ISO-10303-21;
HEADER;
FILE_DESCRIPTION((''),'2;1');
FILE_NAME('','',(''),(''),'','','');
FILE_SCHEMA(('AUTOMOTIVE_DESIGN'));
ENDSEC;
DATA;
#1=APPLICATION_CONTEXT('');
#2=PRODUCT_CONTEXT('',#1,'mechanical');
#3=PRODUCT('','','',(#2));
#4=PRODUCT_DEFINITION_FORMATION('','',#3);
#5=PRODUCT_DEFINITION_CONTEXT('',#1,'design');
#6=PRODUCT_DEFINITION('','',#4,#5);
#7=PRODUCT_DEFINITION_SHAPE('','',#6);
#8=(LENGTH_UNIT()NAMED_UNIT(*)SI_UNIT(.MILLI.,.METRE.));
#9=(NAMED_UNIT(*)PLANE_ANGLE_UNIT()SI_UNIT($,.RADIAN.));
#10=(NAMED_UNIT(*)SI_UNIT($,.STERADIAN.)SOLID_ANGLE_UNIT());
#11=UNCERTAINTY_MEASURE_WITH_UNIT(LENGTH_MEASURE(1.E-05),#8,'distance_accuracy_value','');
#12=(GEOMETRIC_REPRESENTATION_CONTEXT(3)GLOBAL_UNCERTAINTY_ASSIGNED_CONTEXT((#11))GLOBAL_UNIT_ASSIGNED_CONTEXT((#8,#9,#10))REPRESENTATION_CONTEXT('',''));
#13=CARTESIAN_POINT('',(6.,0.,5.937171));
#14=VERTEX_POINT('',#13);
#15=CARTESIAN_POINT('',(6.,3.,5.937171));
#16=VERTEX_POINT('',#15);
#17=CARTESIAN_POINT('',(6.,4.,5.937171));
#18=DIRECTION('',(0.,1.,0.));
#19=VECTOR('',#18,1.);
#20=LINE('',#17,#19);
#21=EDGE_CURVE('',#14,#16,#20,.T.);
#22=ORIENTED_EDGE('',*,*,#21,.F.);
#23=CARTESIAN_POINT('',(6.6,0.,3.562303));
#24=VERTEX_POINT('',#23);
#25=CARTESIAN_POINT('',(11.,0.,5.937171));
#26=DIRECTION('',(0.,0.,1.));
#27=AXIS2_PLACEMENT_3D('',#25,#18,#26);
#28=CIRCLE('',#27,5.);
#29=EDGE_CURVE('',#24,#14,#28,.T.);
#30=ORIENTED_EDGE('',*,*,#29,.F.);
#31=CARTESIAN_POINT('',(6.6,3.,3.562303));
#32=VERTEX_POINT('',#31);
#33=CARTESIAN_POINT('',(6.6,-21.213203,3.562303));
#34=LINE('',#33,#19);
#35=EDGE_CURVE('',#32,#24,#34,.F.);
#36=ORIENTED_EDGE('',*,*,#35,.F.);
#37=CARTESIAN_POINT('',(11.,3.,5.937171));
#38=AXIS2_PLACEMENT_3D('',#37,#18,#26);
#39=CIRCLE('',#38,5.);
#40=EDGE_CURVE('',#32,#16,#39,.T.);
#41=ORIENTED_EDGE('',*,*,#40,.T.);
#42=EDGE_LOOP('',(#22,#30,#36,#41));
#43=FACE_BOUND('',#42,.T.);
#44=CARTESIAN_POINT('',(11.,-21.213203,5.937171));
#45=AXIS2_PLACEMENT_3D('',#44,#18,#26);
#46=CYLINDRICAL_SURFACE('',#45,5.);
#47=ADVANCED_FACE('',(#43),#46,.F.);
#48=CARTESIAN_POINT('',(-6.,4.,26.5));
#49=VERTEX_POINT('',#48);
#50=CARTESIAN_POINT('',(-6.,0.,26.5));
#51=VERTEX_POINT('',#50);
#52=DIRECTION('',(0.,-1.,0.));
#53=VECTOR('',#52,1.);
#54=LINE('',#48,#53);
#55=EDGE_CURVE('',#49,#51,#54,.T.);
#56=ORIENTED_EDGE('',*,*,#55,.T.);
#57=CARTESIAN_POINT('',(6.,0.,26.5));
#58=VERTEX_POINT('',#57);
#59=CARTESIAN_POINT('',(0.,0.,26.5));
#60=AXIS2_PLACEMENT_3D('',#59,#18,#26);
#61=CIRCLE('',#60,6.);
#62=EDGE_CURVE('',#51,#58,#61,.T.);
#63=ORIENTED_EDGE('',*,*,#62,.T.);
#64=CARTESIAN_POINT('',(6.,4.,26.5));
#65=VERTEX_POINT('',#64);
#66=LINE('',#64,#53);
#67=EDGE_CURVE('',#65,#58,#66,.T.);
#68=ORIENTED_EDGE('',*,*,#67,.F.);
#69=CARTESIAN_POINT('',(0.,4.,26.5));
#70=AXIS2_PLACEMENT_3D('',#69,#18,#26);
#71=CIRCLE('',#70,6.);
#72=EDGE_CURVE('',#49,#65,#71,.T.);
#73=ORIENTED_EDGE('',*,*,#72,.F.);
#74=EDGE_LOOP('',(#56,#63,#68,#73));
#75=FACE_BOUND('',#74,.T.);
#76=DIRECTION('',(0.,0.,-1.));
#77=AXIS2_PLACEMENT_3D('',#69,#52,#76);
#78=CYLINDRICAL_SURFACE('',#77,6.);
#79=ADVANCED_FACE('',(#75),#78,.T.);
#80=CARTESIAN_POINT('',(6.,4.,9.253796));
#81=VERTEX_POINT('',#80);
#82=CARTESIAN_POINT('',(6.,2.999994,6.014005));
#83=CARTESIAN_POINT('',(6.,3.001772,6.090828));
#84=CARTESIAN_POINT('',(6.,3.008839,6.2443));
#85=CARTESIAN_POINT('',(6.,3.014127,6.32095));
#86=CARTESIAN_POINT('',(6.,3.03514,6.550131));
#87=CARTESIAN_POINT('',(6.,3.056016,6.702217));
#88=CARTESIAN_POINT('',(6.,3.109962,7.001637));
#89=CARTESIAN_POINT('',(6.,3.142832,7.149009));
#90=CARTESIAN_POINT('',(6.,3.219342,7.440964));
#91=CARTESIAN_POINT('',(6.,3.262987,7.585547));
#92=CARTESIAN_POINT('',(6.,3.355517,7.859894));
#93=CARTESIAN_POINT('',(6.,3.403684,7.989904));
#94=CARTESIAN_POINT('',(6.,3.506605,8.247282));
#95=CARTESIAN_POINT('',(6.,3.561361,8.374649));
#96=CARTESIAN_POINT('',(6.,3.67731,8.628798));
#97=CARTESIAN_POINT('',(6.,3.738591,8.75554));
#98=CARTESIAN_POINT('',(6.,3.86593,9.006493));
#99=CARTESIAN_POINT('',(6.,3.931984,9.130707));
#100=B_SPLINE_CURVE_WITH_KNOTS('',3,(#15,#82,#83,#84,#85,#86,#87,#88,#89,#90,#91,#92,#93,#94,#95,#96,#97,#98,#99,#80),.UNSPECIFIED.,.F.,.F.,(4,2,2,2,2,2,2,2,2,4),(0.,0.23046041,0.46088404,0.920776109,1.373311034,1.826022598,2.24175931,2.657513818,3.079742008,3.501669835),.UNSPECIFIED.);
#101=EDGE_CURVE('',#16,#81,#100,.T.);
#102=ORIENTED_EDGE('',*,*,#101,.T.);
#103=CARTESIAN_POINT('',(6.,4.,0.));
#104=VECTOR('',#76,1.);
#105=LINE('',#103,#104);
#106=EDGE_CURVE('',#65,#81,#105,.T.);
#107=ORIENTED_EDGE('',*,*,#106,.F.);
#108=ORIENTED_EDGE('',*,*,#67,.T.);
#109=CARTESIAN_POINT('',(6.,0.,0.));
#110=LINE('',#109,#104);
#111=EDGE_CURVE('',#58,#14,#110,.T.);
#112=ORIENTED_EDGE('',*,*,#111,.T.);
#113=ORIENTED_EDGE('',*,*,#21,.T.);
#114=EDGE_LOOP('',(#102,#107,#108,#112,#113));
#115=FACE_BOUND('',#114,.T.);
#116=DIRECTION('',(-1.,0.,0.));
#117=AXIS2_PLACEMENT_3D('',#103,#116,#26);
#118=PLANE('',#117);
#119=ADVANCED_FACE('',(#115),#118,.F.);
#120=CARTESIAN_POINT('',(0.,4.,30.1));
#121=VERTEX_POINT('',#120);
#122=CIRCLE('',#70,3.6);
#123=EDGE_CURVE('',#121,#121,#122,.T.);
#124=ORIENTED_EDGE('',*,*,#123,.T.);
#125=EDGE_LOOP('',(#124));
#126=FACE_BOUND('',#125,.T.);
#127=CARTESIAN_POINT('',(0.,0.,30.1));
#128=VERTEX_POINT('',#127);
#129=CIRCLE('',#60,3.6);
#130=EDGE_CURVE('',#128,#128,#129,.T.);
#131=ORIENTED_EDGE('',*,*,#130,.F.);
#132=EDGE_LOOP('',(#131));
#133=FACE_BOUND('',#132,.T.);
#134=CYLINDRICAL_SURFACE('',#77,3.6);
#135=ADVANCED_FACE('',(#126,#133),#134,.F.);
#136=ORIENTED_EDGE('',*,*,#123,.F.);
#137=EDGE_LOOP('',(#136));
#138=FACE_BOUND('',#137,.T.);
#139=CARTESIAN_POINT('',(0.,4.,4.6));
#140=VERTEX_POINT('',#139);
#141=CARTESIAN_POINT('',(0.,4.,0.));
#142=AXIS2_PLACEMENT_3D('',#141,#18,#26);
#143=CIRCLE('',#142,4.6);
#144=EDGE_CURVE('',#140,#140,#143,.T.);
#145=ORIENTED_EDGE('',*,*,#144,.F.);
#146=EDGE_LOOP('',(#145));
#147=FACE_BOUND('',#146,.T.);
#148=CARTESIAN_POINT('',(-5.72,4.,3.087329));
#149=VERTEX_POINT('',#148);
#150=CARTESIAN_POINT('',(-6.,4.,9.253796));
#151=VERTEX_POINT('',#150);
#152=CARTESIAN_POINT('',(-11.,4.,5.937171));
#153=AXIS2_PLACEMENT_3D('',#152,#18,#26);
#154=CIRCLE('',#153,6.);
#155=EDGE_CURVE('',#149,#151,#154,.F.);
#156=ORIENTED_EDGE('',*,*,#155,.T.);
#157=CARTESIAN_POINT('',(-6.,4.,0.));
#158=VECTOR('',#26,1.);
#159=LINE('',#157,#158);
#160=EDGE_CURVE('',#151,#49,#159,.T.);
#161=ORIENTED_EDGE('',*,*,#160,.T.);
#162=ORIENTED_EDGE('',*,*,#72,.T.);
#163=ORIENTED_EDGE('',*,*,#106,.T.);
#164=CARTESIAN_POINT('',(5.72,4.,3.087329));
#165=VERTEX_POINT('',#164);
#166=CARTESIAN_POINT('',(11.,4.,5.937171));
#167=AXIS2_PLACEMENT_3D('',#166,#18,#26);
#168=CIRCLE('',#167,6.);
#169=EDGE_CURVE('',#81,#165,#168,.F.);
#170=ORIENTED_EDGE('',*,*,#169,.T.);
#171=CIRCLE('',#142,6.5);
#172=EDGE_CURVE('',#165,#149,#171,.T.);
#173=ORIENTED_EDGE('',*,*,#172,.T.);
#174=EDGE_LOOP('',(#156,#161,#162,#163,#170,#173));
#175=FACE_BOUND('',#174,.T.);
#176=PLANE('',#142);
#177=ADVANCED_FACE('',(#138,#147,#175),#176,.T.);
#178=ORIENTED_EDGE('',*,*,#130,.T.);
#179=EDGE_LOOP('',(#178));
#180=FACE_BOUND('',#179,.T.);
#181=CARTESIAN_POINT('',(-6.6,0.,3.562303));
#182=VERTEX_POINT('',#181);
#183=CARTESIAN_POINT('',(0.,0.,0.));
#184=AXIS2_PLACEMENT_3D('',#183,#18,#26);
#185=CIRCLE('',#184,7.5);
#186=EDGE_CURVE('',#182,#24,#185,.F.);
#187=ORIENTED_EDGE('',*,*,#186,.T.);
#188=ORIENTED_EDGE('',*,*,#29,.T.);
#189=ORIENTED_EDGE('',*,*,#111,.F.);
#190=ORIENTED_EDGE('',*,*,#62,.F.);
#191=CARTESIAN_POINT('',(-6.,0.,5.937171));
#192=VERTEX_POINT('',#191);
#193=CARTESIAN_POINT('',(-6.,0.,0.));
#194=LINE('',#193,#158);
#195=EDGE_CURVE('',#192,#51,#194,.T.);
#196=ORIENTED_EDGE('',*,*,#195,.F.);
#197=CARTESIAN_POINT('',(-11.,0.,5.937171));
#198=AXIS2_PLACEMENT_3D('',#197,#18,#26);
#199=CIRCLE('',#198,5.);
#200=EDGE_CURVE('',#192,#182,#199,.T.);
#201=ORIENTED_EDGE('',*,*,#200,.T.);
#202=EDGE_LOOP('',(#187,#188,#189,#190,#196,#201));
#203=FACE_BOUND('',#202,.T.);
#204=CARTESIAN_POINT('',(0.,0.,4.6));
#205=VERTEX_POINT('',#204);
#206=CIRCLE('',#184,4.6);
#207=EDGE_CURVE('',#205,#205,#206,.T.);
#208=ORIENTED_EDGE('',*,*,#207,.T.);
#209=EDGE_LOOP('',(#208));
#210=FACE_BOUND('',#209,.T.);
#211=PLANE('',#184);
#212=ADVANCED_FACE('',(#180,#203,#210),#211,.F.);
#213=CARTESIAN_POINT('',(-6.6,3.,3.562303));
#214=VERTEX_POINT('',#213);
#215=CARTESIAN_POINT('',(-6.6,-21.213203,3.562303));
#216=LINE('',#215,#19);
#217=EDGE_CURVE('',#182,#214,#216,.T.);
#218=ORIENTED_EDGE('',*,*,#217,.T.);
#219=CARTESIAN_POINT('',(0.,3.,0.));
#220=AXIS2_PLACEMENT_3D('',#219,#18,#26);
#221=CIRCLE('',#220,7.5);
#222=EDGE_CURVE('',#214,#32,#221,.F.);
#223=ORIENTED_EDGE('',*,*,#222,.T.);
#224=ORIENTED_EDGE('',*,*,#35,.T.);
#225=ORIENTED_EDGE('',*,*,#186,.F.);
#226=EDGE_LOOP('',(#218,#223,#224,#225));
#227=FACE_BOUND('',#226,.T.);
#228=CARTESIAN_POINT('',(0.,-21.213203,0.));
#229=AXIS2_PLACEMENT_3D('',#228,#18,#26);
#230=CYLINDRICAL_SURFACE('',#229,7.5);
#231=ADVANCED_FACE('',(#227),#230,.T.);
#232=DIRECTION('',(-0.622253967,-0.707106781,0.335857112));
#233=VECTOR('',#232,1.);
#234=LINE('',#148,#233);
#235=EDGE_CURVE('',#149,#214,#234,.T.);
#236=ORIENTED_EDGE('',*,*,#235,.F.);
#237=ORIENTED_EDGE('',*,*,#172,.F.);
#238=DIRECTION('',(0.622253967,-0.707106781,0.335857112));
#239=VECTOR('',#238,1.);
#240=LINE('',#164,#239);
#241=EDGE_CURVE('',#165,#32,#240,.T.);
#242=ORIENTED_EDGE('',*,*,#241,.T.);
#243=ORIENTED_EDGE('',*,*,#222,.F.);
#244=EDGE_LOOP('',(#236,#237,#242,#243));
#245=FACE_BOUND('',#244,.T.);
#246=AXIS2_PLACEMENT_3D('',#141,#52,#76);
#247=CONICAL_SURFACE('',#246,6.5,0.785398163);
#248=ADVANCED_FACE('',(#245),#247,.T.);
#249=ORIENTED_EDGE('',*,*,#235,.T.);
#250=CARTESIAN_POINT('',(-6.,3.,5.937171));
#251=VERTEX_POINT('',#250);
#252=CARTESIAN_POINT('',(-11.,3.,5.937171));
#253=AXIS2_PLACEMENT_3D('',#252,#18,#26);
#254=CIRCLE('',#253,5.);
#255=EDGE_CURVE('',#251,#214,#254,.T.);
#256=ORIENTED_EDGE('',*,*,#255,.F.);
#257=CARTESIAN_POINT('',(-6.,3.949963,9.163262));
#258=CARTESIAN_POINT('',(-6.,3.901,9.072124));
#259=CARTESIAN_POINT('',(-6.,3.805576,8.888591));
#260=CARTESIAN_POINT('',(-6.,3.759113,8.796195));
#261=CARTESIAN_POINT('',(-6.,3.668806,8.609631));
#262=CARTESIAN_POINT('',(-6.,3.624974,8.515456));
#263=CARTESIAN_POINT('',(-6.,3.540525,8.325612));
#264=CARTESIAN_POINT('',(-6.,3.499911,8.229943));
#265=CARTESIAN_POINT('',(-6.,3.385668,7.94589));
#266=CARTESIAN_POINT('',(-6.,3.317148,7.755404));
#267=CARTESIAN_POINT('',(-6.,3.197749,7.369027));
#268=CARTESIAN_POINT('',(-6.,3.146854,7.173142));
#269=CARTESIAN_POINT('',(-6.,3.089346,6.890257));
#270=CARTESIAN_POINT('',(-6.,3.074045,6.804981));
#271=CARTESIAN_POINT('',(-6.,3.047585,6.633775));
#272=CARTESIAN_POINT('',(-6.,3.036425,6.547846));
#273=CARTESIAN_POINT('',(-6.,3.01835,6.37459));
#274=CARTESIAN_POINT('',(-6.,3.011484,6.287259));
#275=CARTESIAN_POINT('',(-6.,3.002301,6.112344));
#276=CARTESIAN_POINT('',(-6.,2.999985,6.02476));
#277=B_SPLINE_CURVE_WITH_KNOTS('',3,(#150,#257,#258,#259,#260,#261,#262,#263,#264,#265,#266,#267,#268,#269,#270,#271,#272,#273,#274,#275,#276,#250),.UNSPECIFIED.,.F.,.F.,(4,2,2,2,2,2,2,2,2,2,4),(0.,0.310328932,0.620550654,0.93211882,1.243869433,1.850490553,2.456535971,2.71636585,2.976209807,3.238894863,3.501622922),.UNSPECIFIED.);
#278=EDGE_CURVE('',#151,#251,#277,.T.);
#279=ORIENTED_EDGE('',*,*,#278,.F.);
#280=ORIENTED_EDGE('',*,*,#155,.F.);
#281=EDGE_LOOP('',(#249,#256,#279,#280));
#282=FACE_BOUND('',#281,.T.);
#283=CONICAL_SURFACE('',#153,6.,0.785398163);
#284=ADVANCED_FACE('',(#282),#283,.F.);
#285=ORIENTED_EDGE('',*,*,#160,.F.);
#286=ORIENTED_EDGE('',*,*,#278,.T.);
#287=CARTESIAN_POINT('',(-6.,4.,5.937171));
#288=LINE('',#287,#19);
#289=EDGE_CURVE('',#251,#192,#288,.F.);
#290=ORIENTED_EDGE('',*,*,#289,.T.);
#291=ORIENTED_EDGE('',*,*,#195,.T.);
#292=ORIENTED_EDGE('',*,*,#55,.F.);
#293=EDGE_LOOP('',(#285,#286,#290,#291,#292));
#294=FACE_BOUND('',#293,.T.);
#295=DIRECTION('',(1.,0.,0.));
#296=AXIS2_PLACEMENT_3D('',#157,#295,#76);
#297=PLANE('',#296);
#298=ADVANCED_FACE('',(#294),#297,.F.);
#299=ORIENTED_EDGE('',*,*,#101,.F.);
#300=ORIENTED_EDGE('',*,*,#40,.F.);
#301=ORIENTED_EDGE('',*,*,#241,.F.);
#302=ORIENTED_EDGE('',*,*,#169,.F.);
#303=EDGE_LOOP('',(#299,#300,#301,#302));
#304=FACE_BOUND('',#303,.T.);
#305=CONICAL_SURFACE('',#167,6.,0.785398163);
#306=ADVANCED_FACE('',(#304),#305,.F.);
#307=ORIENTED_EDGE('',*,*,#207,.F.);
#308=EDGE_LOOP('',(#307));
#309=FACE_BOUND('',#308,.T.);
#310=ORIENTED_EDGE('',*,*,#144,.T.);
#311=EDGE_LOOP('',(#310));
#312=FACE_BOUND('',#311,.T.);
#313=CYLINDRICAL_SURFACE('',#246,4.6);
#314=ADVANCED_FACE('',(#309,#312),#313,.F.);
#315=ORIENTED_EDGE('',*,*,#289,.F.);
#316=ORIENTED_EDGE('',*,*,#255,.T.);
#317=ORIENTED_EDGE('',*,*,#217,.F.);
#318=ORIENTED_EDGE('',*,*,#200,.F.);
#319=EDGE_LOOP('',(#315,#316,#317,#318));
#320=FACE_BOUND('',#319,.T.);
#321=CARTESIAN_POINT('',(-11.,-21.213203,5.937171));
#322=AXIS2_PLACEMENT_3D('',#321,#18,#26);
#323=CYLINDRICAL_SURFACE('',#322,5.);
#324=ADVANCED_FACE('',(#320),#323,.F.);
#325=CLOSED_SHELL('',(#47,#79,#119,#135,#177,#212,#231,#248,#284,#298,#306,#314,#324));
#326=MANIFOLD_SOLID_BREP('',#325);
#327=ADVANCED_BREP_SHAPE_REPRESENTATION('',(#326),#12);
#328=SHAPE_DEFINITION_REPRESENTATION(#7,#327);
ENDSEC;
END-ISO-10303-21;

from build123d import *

# Parameters (mm, degrees)
SKETCH1_R           = 4.6
SKETCH1_R_2         = 3.6
BOSS_EXTRUDE1_DEPTH = 4
BOSS_EXTRUDE2_START = -4
SKETCH2_R           = 7.5
SKETCH2_R_2         = 4.6
BOSS_EXTRUDE2_DEPTH = 4
FILLET1_R           = 5


with BuildPart() as part:
    # Sketch1 → Boss-Extrude1 (new body)
    with BuildSketch(Plane(origin=(0, 0, 0), x_dir=(1, 0, 0), z_dir=(0, 1, 0))):
        with BuildLine():
            Line((6, 0), (6, -26.5))
            ThreePointArc((6, -26.5), (0, -32.5), (-6, -26.5))
            Line((-6, -26.5), (-6, 0))
            ThreePointArc((-6, 0), (0, 6), (6, 0))
        make_face()
        with Locations(Location((0, 0, 0), (0, 0, 270))):
            Circle(SKETCH1_R, mode=Mode.SUBTRACT)
        with Locations(Location((0, -26.5, 0), (0, 0, 270))):
            Circle(SKETCH1_R_2, mode=Mode.SUBTRACT)
    extrude(amount=BOSS_EXTRUDE1_DEPTH)

    # Sketch2 → Boss-Extrude2 (add)
    with BuildSketch(Plane(origin=(0, 4, 0), x_dir=(1, 0, 0), z_dir=(0, 1, 0)).offset(BOSS_EXTRUDE2_START)):
        Circle(SKETCH2_R)
        with Locations(Location((0, 0, 0), (0, 0, 270))):
            Circle(SKETCH2_R_2, mode=Mode.SUBTRACT)
    extrude(amount=BOSS_EXTRUDE2_DEPTH)

    # Fillet1
    fillet1_edges = [part.edges().sort_by_distance(p)[0] for p in [
        (6, 2, 4.5),
        (-6, 2, 4.5),
    ]]
    fillet(fillet1_edges, radius=FILLET1_R)

    # Chamfer2
    # the kernel refuses this chamfer: 1 mm, written as the material it takes off along each edge
    with BuildSketch(Plane(origin=(0, 4, 0), x_dir=(-0.8800000000000001, 0, 0.47497368348151653), z_dir=(0.47497368348151653, 0, 0.8800000000000001))) as chamfer2_piece_1:
        with BuildLine():
            Line((6.471715729, -0.028284271), (7.528284271, 1.028284271))
            Line((7.528284271, 1.028284271), (7.548284271, 1.028284271))
            ThreePointArc((7.548284271, 1.028284271), (7.52, 0.514142136), (7.52, 0))
            Line((7.52, 0), (7.5, -0.02))
            ThreePointArc((7.5, -0.02), (6.985857864, -0.02), (6.471715729, -0.048284271))
            Line((6.471715729, -0.048284271), (6.471715729, -0.028284271))
        make_face()
    revolve(axis=Axis((0, 4, 0), (0, -1, 0)), revolution_arc=236.715273153, mode=Mode.SUBTRACT)
    with BuildSketch(Plane(origin=(11, 4, 5.937171044), x_dir=(-0.33003370038362406, 0, 0.9439691502433181), z_dir=(0.9439691502433181, 0, 0.33003370038362406))) as chamfer2_piece_2:
        with BuildLine():
            Line((6.028284271, -0.028284271), (4.971715729, 1.028284271))
            Line((4.971715729, 1.028284271), (4.951715729, 1.028284271))
            ThreePointArc((4.951715729, 1.028284271), (4.98, 0.514142136), (4.98, 0))
            Line((4.98, 0), (5, -0.02))
            ThreePointArc((5, -0.02), (5.514142136, -0.02), (6.028284271, -0.048284271))
            Line((6.028284271, -0.048284271), (6.028284271, -0.028284271))
        make_face()
    revolve(axis=Axis((11, 4, 5.937171044), (0, -1, 0)), revolution_arc=99.086815597, mode=Mode.SUBTRACT)
    with BuildSketch(Plane(origin=(-11, 4, 5.937171044), x_dir=(0.3300337003836236, 0, 0.9439691502433183), z_dir=(-0.9439691502433183, 0, 0.3300337003836236))) as chamfer2_piece_3:
        with BuildLine():
            Line((4.971715729, -1.028284271), (6.028284271, 0.028284271))
            Line((6.028284271, 0.028284271), (6.028284271, 0.048284271))
            ThreePointArc((6.028284271, 0.048284271), (5.514142136, 0.02), (5, 0.02))
            Line((5, 0.02), (4.98, 0))
            ThreePointArc((4.98, 0), (4.98, -0.514142136), (4.951715729, -1.028284271))
            Line((4.951715729, -1.028284271), (4.971715729, -1.028284271))
        make_face()
    revolve(axis=Axis((-11, 4, 5.937171044), (0, 1, 0)), revolution_arc=99.086815597, mode=Mode.SUBTRACT)


solid = part.part
